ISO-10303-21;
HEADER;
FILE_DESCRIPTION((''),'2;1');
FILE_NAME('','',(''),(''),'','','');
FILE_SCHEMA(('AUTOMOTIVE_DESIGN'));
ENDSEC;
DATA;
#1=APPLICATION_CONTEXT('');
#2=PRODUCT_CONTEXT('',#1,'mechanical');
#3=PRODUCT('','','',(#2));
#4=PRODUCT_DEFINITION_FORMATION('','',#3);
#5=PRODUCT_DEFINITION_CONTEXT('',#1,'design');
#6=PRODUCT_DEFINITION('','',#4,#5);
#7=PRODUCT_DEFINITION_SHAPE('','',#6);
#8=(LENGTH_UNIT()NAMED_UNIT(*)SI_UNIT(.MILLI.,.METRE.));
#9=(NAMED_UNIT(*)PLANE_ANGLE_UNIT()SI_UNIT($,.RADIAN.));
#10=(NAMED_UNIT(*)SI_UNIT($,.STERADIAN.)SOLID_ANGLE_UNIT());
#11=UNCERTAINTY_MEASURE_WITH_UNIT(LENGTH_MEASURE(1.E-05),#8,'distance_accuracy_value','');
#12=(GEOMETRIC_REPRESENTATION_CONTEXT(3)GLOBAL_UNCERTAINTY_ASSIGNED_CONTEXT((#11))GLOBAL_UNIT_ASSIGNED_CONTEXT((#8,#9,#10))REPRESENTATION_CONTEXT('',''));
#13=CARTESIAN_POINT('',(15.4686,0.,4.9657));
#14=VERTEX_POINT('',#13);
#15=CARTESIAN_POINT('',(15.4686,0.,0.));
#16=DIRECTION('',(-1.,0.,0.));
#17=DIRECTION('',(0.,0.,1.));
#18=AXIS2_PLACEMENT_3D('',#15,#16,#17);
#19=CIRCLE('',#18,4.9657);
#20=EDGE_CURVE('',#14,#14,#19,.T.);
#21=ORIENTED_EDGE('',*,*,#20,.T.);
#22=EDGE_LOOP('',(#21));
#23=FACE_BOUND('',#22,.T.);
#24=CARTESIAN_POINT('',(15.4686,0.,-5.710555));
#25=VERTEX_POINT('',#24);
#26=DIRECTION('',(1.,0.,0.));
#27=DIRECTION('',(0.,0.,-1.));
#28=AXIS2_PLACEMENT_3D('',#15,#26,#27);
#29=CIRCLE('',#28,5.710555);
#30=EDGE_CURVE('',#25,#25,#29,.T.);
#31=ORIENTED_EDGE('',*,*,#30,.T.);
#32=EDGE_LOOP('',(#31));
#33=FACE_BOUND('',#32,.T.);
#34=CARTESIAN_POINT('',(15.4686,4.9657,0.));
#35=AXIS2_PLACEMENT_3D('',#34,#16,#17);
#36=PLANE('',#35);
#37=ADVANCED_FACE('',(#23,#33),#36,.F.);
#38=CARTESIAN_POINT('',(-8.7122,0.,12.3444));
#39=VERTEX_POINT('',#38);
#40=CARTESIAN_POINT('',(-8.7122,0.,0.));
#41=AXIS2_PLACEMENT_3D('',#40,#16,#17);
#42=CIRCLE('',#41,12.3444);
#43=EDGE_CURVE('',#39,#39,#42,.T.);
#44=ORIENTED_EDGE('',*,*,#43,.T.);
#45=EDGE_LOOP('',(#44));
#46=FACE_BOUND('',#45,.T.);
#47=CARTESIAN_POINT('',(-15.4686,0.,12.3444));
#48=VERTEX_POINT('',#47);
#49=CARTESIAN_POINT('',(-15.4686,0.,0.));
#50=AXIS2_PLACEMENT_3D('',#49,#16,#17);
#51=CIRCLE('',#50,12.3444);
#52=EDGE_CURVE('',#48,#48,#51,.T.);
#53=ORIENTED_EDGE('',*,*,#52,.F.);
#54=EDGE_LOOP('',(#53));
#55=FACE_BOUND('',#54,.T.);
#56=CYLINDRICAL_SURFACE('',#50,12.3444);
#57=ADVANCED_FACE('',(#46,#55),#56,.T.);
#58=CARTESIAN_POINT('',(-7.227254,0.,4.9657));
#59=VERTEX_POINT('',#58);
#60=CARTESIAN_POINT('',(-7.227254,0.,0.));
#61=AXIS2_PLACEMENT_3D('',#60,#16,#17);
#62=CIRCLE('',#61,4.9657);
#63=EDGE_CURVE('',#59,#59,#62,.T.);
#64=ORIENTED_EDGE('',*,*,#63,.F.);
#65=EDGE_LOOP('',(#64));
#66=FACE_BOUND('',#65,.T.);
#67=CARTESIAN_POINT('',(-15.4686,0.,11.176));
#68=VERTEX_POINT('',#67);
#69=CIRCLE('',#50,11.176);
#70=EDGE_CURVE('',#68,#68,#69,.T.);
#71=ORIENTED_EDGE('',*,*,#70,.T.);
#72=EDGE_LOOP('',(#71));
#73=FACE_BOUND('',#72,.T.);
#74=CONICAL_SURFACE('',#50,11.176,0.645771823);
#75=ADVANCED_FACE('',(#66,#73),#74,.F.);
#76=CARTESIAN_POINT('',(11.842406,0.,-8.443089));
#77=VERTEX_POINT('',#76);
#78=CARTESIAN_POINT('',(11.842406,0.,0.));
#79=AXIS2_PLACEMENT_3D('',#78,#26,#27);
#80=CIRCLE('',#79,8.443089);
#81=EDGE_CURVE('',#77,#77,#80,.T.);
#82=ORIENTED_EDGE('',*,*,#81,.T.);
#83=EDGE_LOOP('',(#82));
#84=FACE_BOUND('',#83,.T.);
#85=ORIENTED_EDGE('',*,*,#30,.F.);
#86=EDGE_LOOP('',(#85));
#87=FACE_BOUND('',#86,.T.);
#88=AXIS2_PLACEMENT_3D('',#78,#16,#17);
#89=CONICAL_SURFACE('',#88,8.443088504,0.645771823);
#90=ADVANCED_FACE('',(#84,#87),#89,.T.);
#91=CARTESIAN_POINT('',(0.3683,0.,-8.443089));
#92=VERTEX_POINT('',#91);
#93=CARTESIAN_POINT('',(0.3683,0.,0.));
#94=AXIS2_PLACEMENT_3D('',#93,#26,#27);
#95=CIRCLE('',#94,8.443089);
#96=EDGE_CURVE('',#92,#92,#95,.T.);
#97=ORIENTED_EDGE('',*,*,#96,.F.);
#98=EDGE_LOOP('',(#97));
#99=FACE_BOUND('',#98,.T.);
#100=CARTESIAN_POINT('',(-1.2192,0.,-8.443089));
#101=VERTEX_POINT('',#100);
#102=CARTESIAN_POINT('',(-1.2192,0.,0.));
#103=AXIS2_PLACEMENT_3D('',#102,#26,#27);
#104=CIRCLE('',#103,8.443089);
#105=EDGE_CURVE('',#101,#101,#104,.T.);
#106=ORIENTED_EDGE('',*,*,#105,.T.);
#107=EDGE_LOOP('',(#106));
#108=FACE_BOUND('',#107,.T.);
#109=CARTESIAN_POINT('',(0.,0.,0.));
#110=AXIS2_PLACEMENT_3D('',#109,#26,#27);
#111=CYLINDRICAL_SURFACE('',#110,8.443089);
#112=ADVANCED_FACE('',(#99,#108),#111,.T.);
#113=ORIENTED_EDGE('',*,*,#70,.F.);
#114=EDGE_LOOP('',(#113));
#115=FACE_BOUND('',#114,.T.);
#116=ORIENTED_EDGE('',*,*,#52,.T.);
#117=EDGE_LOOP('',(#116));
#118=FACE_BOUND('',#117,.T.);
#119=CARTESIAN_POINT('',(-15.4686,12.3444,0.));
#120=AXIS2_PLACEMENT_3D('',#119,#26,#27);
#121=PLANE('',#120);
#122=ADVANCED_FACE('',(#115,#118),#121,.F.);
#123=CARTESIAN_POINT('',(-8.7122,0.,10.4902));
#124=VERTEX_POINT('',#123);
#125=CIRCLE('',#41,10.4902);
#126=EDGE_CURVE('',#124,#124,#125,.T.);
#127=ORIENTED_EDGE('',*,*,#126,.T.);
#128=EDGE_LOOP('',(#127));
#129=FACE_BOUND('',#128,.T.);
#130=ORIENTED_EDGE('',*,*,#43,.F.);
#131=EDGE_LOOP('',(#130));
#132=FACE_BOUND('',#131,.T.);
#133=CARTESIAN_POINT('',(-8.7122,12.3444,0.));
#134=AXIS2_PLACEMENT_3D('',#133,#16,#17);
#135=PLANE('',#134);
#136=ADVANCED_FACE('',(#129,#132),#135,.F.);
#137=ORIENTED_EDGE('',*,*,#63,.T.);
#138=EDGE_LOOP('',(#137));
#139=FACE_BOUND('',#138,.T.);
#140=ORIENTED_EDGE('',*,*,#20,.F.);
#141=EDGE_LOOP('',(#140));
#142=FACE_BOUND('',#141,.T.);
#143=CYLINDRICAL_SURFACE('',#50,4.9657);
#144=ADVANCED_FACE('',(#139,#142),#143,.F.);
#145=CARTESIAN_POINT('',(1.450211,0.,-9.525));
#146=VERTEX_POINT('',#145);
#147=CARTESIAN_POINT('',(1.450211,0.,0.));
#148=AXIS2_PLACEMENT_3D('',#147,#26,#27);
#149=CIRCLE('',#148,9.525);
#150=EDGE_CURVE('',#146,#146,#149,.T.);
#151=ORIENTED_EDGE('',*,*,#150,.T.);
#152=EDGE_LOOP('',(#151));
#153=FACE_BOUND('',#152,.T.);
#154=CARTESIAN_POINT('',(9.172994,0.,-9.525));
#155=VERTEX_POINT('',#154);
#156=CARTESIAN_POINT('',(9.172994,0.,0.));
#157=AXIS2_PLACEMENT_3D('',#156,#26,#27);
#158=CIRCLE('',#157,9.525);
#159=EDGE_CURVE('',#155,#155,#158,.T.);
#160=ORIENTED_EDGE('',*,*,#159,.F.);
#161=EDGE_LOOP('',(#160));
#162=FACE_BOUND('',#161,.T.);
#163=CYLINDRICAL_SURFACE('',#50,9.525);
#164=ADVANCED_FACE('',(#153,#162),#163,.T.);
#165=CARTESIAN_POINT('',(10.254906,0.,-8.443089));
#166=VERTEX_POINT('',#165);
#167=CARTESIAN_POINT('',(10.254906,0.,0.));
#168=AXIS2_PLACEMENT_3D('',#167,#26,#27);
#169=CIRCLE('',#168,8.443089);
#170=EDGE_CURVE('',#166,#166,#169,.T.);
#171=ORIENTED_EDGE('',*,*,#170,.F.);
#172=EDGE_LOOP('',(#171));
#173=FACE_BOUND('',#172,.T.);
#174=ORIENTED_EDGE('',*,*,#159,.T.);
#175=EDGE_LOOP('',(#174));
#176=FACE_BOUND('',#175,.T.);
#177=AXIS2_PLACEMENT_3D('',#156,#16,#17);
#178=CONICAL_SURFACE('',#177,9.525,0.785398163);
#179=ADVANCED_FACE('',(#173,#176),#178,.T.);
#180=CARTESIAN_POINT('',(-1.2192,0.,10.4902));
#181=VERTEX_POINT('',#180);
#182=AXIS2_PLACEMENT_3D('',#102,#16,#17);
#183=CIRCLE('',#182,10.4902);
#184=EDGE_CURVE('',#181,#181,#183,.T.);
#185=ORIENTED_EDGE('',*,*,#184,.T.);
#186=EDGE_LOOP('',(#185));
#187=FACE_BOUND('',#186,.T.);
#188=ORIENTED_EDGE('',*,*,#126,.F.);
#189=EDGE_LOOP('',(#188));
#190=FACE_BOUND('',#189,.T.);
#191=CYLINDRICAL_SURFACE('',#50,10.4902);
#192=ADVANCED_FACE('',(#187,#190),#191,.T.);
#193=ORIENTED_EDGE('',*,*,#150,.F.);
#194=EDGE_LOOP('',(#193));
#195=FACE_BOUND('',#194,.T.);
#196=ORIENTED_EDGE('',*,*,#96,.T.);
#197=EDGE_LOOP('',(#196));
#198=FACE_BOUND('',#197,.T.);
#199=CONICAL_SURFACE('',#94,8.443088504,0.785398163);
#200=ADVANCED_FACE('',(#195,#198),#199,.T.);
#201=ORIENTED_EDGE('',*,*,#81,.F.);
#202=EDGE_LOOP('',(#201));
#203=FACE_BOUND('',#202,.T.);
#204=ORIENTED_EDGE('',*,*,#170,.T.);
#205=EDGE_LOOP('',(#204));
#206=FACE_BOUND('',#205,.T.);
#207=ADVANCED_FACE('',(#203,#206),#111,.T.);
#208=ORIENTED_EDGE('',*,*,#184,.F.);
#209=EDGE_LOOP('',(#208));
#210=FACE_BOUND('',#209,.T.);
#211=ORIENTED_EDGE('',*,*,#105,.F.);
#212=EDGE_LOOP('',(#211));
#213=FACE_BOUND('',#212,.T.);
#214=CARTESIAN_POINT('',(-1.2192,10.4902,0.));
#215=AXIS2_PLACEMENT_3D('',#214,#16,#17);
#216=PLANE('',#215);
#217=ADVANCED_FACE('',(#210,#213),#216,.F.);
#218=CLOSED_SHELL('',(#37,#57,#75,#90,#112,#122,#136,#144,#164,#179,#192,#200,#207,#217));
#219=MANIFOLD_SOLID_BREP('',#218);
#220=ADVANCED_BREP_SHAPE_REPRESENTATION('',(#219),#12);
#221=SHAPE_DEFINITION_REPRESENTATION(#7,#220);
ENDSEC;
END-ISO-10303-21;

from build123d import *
from build123d.topology import SkipClean

# Parameters (mm, degrees)
CUT_SWEEP1_PITCH = 1.5875
CUT_SWEEP1_TO    = 16.6878


with BuildPart() as part:
    # Sketch1 → Revolve1 (revolve)
    with BuildSketch(Plane.XY, mode=Mode.PRIVATE) as revolve1_sk:
        Polygon((-15.4686, 12.3444), (-15.4686, 11.176), (-7.227253544, 4.9657), (15.4686, 4.9657), (15.4686, 5.710555), (15.4686, 9.525), (10.406660515, 9.525), (-1.2192, 9.525), (-1.2192, 10.4902), (-8.7122, 10.4902), (-8.7122, 12.3444), align=None)
    revolve(revolve1_sk.sketch.rotate(Axis((-15.4686, 0, 0), (1, 0, 0)), 90), axis=Axis((-15.4686, 0, 0), (1, 0, 0)))

    # Cut-Sweep1: arcs per turn and ends read off the stored shape
    # Cut-Sweep1: the profile of Sketch4 profile screwed along a right-hand helix through 12.5 turns, 8 arcs to a turn; built about Z, then put on its axis
    cut_sweep1_z = Axis((0, 0, 0), (0, 0, 1))
    cut_sweep1_corners = [(9.5253, 0, -1.587326795), (9.5253, 0, -2.976735705), (8.493888504, 0, -2.38125), (8.493888504, 0, -2.1828125)]
    with BuildLine(mode=Mode.PRIVATE) as cut_sweep1_profile:
        Line(cut_sweep1_corners[0], cut_sweep1_corners[1])
        Line(cut_sweep1_corners[1], cut_sweep1_corners[2])
        Line(cut_sweep1_corners[2], cut_sweep1_corners[3])
        Line(cut_sweep1_corners[3], cut_sweep1_corners[0])
    cut_sweep1_cap = Face(cut_sweep1_profile.wire())
    cut_sweep1_turn_angles = [0, 22.5, 45, 67.5, 90, 112.5, 135, 157.5, 180, 202.5, 225, 247.5, 270, 292.5, 315, 337.5, 360]
    cut_sweep1_turn_weights = [1, 0.9238795325112867, 1, 0.9238795325112867, 1, 0.9238795325112867, 1, 0.9238795325112867, 1, 0.9238795325112867, 1, 0.9238795325112867, 1, 0.9238795325112867, 1, 0.9238795325112867, 1]
    cut_sweep1_turn_rails = [Edge.make_bspline([Vector(p[0], p[1], 0).rotate(cut_sweep1_z, cut_sweep1_turn_angles[k]) / cut_sweep1_turn_weights[k] + Vector(0, 0, p[2] + CUT_SWEEP1_PITCH * cut_sweep1_turn_angles[k] / 360) for k in range(17)], [0, 0, 0, 1, 1, 2, 2, 3, 3, 4, 4, 5, 5, 6, 6, 7, 7, 8, 8, 8], 2, cut_sweep1_turn_weights) for p in cut_sweep1_corners]
    cut_sweep1_turn_sides = [Face.make_surface_from_curves(cut_sweep1_turn_rails[p[0]], cut_sweep1_turn_rails[p[1]]) for p in [(0, 1), (1, 2), (2, 3), (3, 0)]]
    cut_sweep1_last_angles = [4320, 4342.5, 4365, 4387.5, 4410, 4432.5, 4455, 4477.5, 4500]
    cut_sweep1_last_weights = [1, 0.9238795325112867, 1, 0.9238795325112867, 1, 0.9238795325112867, 1, 0.9238795325112867, 1]
    cut_sweep1_last_rails = [Edge.make_bspline([Vector(p[0], p[1], 0).rotate(cut_sweep1_z, cut_sweep1_last_angles[k]) / cut_sweep1_last_weights[k] + Vector(0, 0, p[2] + CUT_SWEEP1_PITCH * cut_sweep1_last_angles[k] / 360) for k in range(9)], [0, 0, 0, 1, 1, 2, 2, 3, 3, 4, 4, 4], 2, cut_sweep1_last_weights) for p in cut_sweep1_corners]
    cut_sweep1_last_sides = [Face.make_surface_from_curves(cut_sweep1_last_rails[p[0]], cut_sweep1_last_rails[p[1]]) for p in [(0, 1), (1, 2), (2, 3), (3, 0)]]
    cut_sweep1 = Plane(origin=(15.4686, 0, 0), x_dir=(0, 1, 0), z_dir=(-1, 0, 0)) * split(Solid(Shell([*[p.moved(Location((0, 0, CUT_SWEEP1_PITCH * i))) for i in range(12) for p in cut_sweep1_turn_sides], *cut_sweep1_last_sides, cut_sweep1_cap, cut_sweep1_cap.rotate(cut_sweep1_z, 4500).moved(Location((0, 0, CUT_SWEEP1_PITCH * 4500 / 360)))])), bisect_by=Plane.XY.offset(CUT_SWEEP1_TO), keep=Keep.BOTTOM, mode=Mode.PRIVATE)
    add(cut_sweep1, mode=Mode.SUBTRACT)

    # Sketch5 → Cut-Revolve1 (revolve, cut)
    with BuildSketch(Plane.XY, mode=Mode.PRIVATE) as cut_revolve1_sk:
        Polygon((15.4686, 5.710555), (11.842405564, 8.443088504), (10.254905564, 8.443088504), (9.172994068, 9.525), (15.4686, 9.525), align=None)
        Polygon((-1.2192, 9.525), (-1.2192, 8.443088504), (0.3683, 8.443088504), (1.450211496, 9.525), align=None)
    revolve(cut_revolve1_sk.sketch.rotate(Axis((0, 0, 0), (-1, 0, 0)), 90), axis=Axis((0, 0, 0), (-1, 0, 0)), mode=Mode.SUBTRACT)

    # Revolve2: read off the stored shape, not the designer's step
    # Revolve2 outline → Revolve2 (revolve)
    with SkipClean():  # the faces are left unmerged after this step: merging them gives an invalid solid
        with BuildSketch(Plane.YX):
            Polygon((9.525, 1.450211496), (9.525, 9.172994068), (8.443088504, 10.254905564), (8.443088504, 0.3683), align=None)
        revolve(axis=Axis((0, 0, 0), (1, 0, 0)))


solid = part.part
